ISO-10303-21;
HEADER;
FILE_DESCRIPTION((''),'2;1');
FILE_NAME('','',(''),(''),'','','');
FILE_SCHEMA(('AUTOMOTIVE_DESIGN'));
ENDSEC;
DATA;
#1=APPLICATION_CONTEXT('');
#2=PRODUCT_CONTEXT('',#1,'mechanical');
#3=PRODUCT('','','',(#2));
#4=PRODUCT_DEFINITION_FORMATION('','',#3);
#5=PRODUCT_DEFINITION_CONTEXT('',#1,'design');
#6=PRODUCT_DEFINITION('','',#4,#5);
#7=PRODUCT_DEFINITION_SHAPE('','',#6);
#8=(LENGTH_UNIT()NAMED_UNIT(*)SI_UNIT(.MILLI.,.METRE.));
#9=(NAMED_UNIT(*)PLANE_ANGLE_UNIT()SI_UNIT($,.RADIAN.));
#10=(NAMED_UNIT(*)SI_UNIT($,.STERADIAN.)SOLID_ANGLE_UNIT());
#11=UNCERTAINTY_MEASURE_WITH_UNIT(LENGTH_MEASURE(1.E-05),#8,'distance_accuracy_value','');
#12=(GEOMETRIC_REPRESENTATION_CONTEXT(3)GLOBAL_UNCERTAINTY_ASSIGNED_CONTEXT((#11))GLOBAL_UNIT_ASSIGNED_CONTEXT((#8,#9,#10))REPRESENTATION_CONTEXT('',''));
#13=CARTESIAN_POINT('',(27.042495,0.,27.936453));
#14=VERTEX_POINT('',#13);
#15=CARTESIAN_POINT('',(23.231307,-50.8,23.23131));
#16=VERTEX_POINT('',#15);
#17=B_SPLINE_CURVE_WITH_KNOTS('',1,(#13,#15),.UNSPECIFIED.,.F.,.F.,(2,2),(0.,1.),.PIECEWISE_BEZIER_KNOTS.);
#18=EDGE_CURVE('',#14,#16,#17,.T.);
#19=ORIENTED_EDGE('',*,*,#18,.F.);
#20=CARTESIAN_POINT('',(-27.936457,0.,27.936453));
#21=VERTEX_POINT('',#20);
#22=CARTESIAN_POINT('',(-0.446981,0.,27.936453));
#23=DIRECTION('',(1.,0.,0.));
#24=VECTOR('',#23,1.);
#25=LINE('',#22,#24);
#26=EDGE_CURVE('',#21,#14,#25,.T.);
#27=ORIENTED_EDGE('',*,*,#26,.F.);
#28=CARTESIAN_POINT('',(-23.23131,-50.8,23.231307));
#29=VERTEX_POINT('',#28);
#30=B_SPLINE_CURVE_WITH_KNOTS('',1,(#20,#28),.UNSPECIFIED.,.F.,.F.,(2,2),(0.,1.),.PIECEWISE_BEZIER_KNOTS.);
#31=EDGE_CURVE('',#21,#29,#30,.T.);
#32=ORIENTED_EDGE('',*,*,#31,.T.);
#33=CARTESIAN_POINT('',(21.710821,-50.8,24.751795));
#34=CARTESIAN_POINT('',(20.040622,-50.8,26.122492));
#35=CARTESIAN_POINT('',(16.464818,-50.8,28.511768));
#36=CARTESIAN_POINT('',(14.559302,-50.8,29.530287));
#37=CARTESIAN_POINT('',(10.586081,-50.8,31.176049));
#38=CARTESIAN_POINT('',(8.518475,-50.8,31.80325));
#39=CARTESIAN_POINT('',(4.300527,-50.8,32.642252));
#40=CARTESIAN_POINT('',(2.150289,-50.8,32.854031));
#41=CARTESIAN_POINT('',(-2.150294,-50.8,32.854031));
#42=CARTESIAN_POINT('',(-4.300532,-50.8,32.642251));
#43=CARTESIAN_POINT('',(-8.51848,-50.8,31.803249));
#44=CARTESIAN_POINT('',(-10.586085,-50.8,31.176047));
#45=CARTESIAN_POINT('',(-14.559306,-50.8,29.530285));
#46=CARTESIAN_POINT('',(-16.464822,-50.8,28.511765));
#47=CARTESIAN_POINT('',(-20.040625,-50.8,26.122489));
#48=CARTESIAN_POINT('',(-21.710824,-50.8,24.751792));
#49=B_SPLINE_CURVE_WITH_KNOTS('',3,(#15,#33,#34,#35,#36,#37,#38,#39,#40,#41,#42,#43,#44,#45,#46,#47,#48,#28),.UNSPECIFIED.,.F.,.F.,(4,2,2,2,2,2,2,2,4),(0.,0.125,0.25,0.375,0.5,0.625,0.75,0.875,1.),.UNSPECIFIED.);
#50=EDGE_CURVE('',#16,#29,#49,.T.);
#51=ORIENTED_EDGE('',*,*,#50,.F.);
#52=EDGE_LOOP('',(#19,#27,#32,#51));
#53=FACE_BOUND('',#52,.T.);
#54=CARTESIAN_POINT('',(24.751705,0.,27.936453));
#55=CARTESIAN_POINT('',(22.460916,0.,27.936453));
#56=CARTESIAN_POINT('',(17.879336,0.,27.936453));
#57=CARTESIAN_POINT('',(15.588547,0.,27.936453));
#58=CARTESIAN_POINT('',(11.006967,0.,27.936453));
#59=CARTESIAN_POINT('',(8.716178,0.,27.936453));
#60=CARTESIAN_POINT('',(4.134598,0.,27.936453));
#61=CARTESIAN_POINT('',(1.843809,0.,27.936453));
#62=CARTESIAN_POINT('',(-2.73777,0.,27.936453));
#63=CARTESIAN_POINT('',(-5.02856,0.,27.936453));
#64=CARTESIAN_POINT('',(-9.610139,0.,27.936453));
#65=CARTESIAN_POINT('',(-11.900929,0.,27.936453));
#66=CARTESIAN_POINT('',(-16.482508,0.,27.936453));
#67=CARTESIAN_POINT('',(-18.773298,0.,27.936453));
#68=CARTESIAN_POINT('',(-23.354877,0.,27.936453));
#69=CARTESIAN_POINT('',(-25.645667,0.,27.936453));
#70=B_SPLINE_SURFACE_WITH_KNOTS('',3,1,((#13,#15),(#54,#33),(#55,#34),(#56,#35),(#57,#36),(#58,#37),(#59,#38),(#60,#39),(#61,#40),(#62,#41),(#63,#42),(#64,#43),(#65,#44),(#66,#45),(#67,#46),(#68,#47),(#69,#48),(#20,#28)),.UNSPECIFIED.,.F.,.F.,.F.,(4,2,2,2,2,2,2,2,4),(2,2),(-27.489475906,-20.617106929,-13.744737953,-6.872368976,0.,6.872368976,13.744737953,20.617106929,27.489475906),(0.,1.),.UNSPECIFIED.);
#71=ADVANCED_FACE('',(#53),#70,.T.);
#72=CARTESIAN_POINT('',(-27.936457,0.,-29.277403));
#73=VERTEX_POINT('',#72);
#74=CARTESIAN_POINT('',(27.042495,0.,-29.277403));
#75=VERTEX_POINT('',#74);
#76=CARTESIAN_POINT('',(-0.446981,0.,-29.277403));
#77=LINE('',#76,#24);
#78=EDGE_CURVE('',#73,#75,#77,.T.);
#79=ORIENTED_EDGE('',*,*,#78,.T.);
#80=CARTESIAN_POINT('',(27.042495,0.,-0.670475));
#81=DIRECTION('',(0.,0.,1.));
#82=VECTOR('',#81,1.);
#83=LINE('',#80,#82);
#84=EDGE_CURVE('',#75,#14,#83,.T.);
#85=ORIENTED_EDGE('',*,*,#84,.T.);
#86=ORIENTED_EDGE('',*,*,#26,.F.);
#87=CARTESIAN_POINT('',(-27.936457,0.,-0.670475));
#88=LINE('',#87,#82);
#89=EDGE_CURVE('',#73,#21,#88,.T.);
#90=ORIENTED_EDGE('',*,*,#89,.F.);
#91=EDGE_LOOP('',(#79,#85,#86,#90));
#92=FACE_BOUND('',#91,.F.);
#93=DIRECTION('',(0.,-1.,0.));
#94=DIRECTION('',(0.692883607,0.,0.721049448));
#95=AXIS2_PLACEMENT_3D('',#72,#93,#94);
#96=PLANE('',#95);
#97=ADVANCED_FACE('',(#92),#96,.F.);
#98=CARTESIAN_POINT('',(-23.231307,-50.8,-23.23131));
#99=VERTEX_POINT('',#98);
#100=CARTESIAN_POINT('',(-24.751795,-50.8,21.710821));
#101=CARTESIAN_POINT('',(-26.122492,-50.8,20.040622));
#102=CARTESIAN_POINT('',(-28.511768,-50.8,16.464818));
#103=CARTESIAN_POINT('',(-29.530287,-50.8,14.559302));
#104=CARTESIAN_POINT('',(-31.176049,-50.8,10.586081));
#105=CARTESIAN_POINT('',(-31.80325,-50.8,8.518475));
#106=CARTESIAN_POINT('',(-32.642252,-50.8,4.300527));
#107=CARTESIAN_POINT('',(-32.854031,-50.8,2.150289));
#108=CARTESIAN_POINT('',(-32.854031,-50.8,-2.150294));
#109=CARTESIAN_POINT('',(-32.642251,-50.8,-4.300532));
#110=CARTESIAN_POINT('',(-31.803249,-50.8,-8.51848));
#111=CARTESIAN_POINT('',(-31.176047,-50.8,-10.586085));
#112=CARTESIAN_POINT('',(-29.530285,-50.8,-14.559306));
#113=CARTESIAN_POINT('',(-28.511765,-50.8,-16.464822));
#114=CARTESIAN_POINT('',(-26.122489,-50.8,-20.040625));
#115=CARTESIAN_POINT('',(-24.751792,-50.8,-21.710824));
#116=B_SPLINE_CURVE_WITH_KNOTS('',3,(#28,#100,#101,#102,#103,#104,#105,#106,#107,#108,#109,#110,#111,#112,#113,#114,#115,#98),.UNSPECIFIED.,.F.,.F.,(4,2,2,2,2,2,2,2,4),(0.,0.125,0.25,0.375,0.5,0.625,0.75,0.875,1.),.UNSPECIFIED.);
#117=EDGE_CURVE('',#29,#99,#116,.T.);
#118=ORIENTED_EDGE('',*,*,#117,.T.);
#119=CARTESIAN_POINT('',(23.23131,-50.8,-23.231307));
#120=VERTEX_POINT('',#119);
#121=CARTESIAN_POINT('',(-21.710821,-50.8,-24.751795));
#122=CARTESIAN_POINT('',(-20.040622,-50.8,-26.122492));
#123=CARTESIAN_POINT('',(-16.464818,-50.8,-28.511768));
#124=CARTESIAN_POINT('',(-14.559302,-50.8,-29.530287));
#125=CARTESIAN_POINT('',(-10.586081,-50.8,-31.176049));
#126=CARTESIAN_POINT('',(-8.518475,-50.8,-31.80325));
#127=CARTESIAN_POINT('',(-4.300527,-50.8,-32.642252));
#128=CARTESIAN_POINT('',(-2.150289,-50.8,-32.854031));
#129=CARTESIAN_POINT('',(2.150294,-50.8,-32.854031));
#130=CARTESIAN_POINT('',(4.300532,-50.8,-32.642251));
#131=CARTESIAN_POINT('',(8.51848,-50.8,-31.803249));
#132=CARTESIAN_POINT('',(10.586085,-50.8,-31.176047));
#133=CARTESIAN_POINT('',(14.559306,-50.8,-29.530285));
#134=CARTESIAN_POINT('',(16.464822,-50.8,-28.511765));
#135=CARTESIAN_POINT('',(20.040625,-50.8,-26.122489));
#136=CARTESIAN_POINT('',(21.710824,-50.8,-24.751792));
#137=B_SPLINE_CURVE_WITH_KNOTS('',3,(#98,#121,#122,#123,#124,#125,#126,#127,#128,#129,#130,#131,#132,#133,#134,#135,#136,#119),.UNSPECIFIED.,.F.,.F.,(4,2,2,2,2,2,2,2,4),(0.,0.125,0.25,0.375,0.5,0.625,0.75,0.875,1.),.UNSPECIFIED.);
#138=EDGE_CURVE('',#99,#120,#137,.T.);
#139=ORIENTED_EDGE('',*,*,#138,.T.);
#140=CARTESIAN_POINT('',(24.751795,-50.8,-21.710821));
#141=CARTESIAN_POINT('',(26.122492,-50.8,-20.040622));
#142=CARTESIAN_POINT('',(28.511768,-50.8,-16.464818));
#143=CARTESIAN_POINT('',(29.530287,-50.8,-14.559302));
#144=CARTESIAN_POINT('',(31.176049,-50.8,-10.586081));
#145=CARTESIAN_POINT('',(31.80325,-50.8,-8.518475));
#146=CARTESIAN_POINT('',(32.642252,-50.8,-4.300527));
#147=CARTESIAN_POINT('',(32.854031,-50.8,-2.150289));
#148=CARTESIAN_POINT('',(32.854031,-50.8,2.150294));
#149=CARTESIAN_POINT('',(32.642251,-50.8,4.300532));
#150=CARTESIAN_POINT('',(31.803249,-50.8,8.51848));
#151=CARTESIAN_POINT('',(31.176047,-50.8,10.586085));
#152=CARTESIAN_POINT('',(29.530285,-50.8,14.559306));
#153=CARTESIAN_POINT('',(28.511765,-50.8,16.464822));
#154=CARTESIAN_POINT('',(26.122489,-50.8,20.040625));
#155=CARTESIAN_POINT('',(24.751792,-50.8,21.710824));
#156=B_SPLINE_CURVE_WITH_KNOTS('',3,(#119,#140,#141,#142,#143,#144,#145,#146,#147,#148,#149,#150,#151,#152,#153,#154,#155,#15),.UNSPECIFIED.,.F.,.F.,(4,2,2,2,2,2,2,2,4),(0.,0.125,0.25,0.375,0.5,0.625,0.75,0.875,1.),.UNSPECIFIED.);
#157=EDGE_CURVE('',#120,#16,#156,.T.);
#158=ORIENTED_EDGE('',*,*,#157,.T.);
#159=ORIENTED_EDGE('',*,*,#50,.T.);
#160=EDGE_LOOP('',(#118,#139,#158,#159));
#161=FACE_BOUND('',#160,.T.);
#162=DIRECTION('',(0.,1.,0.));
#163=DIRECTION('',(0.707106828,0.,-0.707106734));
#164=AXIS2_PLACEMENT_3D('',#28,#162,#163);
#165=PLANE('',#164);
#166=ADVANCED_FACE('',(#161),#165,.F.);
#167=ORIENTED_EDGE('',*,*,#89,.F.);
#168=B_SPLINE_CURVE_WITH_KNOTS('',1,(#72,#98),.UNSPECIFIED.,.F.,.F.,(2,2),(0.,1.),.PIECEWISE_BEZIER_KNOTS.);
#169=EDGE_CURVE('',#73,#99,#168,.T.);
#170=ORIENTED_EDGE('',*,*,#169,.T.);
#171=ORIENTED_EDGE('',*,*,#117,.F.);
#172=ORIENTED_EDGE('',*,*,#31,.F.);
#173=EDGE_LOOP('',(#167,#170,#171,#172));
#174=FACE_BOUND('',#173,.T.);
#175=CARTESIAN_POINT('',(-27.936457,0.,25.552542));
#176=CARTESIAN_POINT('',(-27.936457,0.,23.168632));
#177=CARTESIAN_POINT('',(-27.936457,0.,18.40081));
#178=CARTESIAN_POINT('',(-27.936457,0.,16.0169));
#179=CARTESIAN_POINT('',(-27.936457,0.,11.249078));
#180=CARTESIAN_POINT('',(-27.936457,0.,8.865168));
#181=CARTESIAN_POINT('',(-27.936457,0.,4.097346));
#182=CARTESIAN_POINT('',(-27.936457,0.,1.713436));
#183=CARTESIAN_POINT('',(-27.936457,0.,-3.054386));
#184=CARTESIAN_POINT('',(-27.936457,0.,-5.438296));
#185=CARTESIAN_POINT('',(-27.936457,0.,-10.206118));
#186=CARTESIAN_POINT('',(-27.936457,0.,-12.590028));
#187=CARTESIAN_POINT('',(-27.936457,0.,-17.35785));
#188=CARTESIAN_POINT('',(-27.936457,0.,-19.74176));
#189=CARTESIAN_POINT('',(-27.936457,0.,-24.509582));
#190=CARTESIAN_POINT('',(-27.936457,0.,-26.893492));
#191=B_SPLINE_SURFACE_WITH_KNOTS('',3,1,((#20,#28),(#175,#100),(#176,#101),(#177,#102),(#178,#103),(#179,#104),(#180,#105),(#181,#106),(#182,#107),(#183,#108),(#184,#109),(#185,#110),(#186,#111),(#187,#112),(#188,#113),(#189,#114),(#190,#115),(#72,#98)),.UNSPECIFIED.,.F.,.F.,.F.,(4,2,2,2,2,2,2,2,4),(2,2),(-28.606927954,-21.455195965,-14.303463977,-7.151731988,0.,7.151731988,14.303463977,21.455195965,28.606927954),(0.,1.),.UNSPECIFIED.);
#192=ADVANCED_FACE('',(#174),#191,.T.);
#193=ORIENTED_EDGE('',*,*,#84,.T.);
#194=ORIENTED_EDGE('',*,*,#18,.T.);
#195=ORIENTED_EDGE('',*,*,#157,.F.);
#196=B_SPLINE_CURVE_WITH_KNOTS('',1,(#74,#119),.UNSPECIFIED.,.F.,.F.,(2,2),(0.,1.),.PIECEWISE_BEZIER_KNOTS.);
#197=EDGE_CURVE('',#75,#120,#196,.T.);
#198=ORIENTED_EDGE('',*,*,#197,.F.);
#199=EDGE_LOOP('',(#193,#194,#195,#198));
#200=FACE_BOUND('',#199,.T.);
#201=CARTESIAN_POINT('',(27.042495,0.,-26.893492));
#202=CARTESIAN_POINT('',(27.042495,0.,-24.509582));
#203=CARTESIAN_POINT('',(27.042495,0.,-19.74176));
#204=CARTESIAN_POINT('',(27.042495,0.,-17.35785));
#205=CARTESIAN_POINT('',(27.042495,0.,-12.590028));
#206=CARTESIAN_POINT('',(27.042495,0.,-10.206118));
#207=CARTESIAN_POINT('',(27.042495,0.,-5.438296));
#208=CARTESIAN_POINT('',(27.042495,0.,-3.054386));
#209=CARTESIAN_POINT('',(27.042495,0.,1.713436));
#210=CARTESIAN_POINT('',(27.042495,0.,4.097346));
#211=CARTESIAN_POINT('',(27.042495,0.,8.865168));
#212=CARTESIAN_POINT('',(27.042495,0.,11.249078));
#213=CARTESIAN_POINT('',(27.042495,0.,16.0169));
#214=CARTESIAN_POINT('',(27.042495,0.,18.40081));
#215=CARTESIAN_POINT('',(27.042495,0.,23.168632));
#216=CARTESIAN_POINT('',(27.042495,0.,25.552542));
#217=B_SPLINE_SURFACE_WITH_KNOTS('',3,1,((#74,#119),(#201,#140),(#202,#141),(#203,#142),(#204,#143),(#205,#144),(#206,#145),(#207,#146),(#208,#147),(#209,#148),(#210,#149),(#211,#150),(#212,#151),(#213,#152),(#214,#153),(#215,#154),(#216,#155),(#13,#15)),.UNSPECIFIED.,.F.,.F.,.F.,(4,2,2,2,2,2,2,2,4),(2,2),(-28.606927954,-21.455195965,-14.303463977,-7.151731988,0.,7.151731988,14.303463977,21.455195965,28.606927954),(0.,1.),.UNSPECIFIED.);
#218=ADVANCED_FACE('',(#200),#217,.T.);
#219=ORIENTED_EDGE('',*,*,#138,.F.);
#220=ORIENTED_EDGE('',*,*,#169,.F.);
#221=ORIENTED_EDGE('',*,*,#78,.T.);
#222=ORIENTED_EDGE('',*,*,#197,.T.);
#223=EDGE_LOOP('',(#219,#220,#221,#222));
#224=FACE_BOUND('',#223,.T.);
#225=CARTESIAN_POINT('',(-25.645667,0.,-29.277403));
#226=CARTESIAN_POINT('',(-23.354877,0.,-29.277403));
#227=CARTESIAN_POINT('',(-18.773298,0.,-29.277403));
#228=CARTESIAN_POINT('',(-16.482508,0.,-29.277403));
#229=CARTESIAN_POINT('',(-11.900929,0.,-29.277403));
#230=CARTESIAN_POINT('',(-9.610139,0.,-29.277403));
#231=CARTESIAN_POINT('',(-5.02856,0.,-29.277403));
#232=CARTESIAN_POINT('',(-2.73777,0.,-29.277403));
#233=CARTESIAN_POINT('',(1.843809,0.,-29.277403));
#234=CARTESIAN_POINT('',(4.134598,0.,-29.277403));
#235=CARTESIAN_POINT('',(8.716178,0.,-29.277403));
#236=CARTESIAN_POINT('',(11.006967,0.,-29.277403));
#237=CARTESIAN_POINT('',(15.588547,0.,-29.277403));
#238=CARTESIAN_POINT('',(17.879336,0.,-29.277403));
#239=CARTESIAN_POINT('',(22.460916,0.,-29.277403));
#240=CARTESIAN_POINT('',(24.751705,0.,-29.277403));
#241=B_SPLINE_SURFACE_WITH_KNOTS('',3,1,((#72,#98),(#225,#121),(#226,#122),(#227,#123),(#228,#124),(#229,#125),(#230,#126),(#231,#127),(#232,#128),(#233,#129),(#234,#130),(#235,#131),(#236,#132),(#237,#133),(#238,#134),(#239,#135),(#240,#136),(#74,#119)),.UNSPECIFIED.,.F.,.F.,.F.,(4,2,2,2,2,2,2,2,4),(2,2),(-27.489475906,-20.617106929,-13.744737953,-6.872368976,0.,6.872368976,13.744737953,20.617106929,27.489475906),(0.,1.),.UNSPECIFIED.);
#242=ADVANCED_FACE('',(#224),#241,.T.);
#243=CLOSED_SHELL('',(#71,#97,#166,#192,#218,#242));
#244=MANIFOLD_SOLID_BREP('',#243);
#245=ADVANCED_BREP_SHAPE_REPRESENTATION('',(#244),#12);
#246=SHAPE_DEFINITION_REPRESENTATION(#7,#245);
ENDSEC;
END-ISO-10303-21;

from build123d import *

# Parameters (mm, degrees)
F0_W = 54.9789518118
F0_H = 57.2138559073


# Not quite as in the source:
# - the arcs of a loft's sections are written as splines that run evenly, so that the points pair up as in the source's solid


with BuildPart() as f3:
    # F0 (on Front) → F3 section 0
    with BuildSketch(Plane.XZ):
        with Locations((-0.4469808191, -0.6704749539)):
            Rectangle(F0_W, F0_H)
    # F2 (on offset) → F3 section 1
    with BuildSketch(Plane.XZ.offset(50.8)):
        with BuildLine():
            add(Edge.make_bspline(
                [(-23.2313098206, 23.2313067227), (-24.75179529, 21.7108210505), (-26.1224920978, 20.0406219306), (-28.511767554, 16.4648179982), (-29.5302871228, 14.5593016045), (-31.1760485804, 10.5860812238), (-31.8032497745, 8.5184754826), (-32.6422515437, 4.3005272847), (-32.8540313728, 2.1502891251), (-32.8540310861, -2.1502935062), (-32.6422509702, -4.3005316375), (-31.8032486386, -8.5184797235), (-31.1760471688, -10.5860853811), (-29.5302851814, -14.5593055423), (-28.5117653584, -16.4648218002), (-26.1224894254, -20.040625414), (-24.7517923949, -21.7108243511), (-23.2313067227, -23.2313098206)],
                knots=[0, 0, 0, 0, 0.125, 0.125, 0.25, 0.25, 0.375, 0.375, 0.5, 0.5, 0.625, 0.625, 0.75, 0.75, 0.875, 0.875, 1, 1, 1, 1], degree=3))
            add(Edge.make_bspline(
                [(-23.2313067227, -23.2313098206), (-21.7108210505, -24.75179529), (-20.0406219306, -26.1224920978), (-16.4648179982, -28.511767554), (-14.5593016045, -29.5302871228), (-10.5860812238, -31.1760485804), (-8.5184754826, -31.8032497745), (-4.3005272847, -32.6422515437), (-2.1502891251, -32.8540313728), (2.1502935062, -32.8540310861), (4.3005316375, -32.6422509702), (8.5184797235, -31.8032486386), (10.5860853811, -31.1760471688), (14.5593055423, -29.5302851814), (16.4648218002, -28.5117653584), (20.040625414, -26.1224894254), (21.7108243511, -24.7517923949), (23.2313098206, -23.2313067227)],
                knots=[0, 0, 0, 0, 0.125, 0.125, 0.25, 0.25, 0.375, 0.375, 0.5, 0.5, 0.625, 0.625, 0.75, 0.75, 0.875, 0.875, 1, 1, 1, 1], degree=3))
            add(Edge.make_bspline(
                [(23.2313098206, -23.2313067227), (24.75179529, -21.7108210505), (26.1224920978, -20.0406219306), (28.511767554, -16.4648179982), (29.5302871228, -14.5593016045), (31.1760485804, -10.5860812238), (31.8032497745, -8.5184754826), (32.6422515437, -4.3005272847), (32.8540313728, -2.1502891251), (32.8540310861, 2.1502935062), (32.6422509702, 4.3005316375), (31.8032486386, 8.5184797235), (31.1760471688, 10.5860853811), (29.5302851814, 14.5593055423), (28.5117653584, 16.4648218002), (26.1224894254, 20.040625414), (24.7517923949, 21.7108243511), (23.2313067227, 23.2313098206)],
                knots=[0, 0, 0, 0, 0.125, 0.125, 0.25, 0.25, 0.375, 0.375, 0.5, 0.5, 0.625, 0.625, 0.75, 0.75, 0.875, 0.875, 1, 1, 1, 1], degree=3))
            add(Edge.make_bspline(
                [(23.2313067227, 23.2313098206), (21.7108210505, 24.75179529), (20.0406219306, 26.1224920978), (16.4648179982, 28.511767554), (14.5593016045, 29.5302871228), (10.5860812238, 31.1760485804), (8.5184754826, 31.8032497745), (4.3005272847, 32.6422515437), (2.1502891251, 32.8540313728), (-2.1502935062, 32.8540310861), (-4.3005316375, 32.6422509702), (-8.5184797235, 31.8032486386), (-10.5860853811, 31.1760471688), (-14.5593055423, 29.5302851814), (-16.4648218002, 28.5117653584), (-20.040625414, 26.1224894254), (-21.7108243511, 24.7517923949), (-23.2313098206, 23.2313067227)],
                knots=[0, 0, 0, 0, 0.125, 0.125, 0.25, 0.25, 0.375, 0.375, 0.5, 0.5, 0.625, 0.625, 0.75, 0.75, 0.875, 0.875, 1, 1, 1, 1], degree=3))
        make_face()
    loft(ruled=True)


solid = f3.part
